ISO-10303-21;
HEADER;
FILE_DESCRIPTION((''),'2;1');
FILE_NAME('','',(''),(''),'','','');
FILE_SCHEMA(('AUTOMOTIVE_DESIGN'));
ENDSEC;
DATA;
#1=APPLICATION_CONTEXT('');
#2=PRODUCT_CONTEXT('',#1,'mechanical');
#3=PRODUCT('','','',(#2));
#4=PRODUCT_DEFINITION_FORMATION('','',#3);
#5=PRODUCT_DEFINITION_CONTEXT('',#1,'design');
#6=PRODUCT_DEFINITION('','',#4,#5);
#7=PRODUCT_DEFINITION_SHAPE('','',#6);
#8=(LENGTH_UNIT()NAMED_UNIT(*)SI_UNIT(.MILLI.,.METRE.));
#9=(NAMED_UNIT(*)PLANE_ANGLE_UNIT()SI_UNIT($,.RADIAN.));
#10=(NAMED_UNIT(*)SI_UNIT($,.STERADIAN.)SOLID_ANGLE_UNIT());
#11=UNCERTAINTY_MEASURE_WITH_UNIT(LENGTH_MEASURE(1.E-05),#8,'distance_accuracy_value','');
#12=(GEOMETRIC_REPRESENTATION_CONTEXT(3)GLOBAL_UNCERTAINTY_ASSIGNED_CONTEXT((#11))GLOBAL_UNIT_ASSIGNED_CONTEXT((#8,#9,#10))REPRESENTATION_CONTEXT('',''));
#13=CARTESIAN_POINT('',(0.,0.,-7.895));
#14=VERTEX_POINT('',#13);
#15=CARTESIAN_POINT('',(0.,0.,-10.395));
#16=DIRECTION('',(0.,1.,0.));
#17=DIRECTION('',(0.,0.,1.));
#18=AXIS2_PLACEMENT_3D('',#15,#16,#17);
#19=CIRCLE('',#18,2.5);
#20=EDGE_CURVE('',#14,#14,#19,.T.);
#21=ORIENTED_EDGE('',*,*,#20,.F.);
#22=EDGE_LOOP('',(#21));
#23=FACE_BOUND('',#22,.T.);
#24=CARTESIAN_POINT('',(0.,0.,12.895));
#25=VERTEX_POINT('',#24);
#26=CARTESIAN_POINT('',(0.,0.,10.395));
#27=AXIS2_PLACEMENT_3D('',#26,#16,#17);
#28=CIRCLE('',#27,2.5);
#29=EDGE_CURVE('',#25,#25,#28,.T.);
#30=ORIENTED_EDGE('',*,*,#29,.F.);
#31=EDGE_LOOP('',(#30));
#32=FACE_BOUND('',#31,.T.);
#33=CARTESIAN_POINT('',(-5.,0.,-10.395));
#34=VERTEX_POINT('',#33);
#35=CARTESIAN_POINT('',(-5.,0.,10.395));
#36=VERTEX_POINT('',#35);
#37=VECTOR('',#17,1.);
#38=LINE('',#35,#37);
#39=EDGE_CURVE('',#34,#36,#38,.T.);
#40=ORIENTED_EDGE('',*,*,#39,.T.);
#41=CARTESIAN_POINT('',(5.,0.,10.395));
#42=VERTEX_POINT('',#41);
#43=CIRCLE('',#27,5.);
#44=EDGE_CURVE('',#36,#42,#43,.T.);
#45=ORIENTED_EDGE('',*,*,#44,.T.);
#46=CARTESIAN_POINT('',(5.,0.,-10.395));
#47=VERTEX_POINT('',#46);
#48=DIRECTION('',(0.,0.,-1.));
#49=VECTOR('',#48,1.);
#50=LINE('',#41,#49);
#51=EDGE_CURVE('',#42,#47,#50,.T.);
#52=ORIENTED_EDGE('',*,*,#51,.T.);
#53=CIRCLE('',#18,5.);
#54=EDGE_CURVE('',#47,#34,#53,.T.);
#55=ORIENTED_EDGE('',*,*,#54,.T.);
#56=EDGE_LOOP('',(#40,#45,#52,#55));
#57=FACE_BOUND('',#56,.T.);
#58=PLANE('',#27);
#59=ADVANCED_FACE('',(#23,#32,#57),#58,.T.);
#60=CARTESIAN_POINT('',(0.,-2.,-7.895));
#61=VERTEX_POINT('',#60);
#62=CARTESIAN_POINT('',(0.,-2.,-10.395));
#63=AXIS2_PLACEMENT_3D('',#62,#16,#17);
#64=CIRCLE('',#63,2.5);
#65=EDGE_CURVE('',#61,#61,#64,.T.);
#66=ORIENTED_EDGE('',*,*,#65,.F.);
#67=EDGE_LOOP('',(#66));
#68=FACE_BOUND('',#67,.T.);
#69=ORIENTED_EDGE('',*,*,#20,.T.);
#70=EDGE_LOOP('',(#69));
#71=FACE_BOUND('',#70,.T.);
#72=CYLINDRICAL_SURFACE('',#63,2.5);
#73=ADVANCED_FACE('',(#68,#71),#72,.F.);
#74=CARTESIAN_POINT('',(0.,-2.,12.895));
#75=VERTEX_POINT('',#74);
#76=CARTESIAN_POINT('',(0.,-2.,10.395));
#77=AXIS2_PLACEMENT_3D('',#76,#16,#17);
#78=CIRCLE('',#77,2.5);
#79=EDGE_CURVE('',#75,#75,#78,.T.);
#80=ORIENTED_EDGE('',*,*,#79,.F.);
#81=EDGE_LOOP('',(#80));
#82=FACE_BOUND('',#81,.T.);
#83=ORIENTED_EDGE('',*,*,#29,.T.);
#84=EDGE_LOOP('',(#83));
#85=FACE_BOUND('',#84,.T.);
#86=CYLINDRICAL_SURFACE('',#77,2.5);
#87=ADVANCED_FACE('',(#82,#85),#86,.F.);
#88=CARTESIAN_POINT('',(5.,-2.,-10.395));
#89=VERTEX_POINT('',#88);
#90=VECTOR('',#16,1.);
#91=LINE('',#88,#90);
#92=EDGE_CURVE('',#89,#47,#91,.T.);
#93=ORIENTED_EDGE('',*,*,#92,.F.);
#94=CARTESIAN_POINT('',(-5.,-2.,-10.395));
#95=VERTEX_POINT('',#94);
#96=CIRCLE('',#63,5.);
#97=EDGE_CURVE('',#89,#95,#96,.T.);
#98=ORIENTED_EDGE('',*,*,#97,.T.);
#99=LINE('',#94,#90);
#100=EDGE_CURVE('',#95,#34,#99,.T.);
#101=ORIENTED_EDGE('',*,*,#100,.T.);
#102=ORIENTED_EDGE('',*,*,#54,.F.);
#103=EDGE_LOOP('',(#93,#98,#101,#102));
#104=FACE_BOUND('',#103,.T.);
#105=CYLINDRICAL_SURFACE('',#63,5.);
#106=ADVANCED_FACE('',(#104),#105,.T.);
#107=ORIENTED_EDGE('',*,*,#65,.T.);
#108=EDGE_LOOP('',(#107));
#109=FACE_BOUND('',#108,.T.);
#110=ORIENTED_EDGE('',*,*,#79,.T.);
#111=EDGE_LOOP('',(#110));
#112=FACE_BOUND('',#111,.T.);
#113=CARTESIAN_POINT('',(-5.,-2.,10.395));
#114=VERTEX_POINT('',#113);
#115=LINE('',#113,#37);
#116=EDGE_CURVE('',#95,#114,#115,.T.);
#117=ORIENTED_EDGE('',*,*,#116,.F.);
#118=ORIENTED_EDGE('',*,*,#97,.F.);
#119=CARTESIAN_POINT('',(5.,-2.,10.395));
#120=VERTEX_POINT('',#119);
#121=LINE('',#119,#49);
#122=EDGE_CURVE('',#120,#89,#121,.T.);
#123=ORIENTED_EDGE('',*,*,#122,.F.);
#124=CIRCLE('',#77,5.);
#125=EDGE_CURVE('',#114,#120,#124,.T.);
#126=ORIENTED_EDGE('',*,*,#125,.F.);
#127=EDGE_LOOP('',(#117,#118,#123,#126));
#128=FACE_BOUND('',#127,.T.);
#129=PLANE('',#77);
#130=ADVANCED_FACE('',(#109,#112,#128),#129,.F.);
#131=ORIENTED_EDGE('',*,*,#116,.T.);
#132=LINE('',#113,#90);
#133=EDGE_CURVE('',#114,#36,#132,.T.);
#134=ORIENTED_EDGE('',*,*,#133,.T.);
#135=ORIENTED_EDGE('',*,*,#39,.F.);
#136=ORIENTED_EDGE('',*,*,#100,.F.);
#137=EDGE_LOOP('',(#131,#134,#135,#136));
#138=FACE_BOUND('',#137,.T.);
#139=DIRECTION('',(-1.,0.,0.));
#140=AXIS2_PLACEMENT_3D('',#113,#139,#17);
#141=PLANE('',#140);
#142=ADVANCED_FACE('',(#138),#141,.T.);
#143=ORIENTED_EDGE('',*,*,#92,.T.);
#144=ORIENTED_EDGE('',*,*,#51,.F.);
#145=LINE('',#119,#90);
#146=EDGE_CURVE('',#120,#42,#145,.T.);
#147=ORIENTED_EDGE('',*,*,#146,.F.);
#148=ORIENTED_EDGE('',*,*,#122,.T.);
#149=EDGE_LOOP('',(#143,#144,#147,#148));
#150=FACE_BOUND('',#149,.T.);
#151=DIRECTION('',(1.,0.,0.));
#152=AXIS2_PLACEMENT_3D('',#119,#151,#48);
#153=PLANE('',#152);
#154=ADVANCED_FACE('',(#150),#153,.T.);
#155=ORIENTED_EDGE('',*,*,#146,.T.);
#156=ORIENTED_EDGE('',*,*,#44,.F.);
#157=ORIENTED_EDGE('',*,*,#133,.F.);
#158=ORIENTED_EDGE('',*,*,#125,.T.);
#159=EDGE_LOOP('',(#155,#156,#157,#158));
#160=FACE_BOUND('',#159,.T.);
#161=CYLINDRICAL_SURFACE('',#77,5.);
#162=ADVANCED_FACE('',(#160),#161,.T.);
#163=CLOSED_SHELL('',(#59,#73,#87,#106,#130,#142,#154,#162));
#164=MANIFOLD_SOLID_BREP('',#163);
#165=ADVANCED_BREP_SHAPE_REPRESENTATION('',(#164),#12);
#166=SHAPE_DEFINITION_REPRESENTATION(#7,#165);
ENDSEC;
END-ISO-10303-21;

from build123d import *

# Parameters (mm, degrees)
SKETCH1_R          = 2.5
BASE_FLANGE1_DEPTH = 2


# Sheet-metal steps are written as plain solids
with BuildPart() as part:
    # Sketch1 → Base-Flange1 (new body)
    with BuildSketch(Plane(origin=(0, 0, 0), x_dir=(1, 0, 0), z_dir=(0, 1, 0))):
        with BuildLine():
            Line((5, -10.395), (5, 10.395))
            ThreePointArc((5, 10.395), (0, 15.395), (-5, 10.395))
            Line((-5, 10.395), (-5, -10.395))
            ThreePointArc((-5, -10.395), (0, -15.395), (5, -10.395))
        make_face()
        with Locations(Location((0, 10.395, 0), (0, 0, 270))):
            Circle(SKETCH1_R, mode=Mode.SUBTRACT)
        with Locations(Location((0, -10.395, 0), (0, 0, 270))):
            Circle(SKETCH1_R, mode=Mode.SUBTRACT)
    extrude(amount=-BASE_FLANGE1_DEPTH)


solid = part.part
